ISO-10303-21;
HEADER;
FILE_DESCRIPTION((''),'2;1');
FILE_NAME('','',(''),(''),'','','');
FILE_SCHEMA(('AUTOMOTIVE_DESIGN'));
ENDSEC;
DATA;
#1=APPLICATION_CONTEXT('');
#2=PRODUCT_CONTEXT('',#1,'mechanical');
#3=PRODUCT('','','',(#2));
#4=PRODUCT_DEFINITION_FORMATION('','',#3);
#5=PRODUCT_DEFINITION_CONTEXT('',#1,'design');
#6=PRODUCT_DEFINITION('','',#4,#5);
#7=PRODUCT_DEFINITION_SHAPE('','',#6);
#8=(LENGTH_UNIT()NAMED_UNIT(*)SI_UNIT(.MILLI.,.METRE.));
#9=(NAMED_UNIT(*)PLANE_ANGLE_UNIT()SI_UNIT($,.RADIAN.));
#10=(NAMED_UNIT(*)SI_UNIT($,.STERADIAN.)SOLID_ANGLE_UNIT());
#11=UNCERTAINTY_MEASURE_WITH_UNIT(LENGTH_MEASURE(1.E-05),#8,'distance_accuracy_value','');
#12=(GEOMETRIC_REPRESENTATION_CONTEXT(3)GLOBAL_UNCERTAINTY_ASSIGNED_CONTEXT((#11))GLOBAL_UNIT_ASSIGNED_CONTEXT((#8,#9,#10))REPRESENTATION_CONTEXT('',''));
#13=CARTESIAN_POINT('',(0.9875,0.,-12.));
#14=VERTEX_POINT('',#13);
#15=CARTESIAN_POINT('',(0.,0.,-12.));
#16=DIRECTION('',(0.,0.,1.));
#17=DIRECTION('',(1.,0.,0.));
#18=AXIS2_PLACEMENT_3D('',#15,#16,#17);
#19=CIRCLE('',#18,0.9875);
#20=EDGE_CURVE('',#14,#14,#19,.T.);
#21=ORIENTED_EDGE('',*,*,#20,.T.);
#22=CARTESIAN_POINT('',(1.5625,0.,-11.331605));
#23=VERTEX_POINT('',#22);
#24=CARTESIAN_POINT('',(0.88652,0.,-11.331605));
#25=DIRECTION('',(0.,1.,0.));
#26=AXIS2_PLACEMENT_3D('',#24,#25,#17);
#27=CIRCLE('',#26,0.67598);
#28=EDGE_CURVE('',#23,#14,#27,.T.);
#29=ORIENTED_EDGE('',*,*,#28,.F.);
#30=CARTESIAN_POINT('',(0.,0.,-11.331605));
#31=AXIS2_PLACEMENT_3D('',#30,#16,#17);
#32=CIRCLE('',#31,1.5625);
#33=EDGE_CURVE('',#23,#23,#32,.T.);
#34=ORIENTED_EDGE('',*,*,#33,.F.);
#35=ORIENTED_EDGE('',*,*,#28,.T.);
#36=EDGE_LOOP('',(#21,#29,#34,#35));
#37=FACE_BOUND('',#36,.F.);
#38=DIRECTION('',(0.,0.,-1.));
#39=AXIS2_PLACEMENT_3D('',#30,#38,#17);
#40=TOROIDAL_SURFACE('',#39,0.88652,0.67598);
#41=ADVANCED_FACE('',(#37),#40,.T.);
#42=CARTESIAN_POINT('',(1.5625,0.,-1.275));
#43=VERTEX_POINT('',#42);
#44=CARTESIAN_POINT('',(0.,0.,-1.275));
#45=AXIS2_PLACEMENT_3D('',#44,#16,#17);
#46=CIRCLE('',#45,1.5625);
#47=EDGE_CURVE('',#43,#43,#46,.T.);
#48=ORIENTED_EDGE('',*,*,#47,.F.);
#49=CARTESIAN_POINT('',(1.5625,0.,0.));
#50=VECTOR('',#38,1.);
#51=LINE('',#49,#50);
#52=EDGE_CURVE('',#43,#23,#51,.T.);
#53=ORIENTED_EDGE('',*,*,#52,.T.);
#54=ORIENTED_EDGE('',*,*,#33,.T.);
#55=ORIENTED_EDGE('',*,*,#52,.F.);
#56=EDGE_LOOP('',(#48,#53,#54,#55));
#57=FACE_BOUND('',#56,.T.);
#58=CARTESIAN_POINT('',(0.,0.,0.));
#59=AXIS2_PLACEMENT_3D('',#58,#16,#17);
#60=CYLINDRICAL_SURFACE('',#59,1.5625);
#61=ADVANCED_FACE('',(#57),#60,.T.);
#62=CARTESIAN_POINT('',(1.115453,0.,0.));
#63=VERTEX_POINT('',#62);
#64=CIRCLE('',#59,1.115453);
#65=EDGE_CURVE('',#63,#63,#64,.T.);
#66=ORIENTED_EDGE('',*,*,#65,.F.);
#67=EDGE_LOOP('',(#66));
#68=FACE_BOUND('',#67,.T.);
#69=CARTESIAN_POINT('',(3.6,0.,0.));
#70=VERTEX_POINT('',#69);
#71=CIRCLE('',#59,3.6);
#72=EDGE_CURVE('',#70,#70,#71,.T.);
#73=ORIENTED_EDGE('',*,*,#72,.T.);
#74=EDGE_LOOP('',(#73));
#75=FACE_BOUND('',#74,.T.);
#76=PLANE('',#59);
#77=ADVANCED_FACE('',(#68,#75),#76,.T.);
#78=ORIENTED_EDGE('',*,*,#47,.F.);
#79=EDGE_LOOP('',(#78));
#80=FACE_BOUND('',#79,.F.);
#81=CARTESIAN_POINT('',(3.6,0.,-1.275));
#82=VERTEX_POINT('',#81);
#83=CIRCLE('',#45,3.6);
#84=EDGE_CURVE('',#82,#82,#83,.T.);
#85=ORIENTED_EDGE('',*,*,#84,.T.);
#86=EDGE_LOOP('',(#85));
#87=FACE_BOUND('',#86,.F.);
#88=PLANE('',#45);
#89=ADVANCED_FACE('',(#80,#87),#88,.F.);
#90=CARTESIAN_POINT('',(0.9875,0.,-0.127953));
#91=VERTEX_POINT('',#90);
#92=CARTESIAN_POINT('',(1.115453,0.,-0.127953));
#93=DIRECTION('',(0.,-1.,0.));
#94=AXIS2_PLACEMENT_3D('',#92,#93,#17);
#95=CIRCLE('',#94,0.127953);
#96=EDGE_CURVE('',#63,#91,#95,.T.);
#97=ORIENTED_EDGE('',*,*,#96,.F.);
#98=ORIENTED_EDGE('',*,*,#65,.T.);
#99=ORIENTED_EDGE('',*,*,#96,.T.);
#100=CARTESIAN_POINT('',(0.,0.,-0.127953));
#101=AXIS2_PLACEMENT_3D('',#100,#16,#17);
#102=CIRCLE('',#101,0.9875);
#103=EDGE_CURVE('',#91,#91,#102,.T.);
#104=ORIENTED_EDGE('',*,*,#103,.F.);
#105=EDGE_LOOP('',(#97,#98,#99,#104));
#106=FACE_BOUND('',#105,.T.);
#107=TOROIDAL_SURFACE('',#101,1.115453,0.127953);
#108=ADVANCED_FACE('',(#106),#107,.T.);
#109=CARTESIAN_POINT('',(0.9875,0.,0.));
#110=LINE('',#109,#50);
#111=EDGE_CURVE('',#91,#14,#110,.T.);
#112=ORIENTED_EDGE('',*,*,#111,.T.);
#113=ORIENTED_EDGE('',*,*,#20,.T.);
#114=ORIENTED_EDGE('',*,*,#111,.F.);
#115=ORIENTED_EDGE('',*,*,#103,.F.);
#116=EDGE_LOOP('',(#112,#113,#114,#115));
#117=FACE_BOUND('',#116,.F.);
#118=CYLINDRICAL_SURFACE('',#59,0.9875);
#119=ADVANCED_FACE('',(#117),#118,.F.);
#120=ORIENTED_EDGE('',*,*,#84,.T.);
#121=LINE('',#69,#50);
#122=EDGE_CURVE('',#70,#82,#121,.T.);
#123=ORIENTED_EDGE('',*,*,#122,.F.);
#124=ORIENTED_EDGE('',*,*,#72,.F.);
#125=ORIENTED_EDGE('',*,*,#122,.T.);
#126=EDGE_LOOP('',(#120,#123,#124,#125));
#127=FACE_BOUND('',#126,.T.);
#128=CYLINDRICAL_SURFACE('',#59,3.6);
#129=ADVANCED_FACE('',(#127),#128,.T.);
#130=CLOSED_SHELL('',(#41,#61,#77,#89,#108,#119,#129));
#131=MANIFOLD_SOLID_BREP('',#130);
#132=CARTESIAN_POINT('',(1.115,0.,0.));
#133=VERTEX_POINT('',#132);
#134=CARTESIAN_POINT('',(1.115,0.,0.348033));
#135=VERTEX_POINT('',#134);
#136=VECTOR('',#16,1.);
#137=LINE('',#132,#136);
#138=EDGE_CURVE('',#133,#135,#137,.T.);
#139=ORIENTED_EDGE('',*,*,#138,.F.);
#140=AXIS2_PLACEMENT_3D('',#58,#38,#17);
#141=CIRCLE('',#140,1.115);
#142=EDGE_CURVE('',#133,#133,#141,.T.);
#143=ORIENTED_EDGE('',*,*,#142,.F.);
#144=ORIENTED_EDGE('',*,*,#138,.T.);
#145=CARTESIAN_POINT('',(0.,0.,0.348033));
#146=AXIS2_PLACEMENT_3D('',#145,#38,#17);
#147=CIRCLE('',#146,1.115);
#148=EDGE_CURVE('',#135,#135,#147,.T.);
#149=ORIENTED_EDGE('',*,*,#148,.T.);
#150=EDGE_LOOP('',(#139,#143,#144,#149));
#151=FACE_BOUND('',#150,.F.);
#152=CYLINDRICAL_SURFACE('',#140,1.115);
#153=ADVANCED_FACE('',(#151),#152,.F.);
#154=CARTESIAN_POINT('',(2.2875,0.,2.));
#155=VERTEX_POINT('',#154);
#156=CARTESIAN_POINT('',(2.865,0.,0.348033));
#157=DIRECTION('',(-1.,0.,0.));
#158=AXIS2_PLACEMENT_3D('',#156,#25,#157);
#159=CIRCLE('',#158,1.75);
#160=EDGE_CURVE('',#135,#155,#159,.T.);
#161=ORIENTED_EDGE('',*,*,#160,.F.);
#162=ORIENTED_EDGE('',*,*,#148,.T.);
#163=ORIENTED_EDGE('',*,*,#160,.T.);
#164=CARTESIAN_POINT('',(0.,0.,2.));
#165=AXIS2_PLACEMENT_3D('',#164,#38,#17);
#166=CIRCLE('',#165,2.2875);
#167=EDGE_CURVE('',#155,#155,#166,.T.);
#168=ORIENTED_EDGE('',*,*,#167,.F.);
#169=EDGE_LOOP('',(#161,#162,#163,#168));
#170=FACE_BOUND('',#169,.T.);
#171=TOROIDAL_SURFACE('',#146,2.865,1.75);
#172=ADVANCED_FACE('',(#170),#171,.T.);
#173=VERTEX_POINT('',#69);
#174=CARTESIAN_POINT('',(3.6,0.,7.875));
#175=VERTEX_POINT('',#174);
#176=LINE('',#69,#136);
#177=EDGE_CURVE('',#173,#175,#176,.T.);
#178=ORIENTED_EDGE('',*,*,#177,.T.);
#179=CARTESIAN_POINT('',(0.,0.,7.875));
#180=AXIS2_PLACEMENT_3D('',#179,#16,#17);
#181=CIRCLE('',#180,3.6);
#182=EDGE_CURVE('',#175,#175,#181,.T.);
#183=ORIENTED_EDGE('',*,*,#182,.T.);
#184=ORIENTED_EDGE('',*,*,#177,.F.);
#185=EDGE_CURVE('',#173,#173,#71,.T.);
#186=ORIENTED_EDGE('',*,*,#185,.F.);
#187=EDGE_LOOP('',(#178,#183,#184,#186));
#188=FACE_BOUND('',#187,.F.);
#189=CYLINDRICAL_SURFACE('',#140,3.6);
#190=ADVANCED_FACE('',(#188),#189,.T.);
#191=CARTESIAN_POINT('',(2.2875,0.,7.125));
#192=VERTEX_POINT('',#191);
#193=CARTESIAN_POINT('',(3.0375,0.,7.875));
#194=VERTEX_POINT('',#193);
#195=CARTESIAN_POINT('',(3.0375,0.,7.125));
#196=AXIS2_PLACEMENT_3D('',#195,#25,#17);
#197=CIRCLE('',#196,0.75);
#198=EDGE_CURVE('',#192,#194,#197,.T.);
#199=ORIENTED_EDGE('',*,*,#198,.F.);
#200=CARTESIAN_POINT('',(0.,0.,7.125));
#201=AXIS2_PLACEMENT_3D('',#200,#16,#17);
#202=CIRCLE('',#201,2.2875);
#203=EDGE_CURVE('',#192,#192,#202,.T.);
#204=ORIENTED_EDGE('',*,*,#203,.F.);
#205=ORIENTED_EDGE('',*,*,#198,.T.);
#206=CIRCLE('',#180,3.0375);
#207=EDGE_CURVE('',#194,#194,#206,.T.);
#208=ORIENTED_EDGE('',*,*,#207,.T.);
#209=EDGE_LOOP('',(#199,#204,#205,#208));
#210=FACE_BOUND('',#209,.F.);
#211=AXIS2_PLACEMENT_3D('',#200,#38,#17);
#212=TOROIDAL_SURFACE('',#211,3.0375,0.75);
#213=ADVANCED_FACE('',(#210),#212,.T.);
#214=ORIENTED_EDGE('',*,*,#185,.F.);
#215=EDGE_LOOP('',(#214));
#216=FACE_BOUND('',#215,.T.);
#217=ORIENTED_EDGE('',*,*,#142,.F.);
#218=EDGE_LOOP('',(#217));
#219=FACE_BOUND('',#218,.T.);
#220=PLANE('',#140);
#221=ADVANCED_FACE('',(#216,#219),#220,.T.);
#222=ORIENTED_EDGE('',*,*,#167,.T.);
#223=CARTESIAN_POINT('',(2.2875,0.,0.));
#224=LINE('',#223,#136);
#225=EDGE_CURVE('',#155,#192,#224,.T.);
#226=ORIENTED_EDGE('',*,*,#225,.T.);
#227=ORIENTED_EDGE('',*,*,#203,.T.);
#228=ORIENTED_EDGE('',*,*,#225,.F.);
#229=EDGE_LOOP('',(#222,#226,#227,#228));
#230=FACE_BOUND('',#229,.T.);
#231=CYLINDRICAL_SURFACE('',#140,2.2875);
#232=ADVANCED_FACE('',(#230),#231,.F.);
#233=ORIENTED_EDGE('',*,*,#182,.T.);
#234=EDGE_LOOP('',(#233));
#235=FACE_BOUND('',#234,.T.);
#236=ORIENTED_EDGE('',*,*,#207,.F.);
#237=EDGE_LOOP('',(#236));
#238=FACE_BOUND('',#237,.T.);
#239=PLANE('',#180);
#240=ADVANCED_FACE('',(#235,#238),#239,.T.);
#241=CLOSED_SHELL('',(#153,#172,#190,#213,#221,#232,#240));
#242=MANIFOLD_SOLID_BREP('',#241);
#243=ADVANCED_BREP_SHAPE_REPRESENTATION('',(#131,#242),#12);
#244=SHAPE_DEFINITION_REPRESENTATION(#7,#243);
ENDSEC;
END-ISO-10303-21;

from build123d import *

# Parameters (mm, degrees)
F0_R     = 1.5625
F0_R_2   = 0.9875
F1_DEPTH = 12
F2_R     = 3.6
F2_R_2   = 2.5
F2_R_3   = 1.5625
F3_DEPTH = 1.275
F4_R     = 3.6
F4_R_2   = 2.2875
F5_DEPTH = 7.875
F6_R     = 2.2875
F6_R_2   = 1.115
F7_DEPTH = 2
F9_R     = 0.75
F11_R    = 0.1279533188


# Not quite as in the source:
# - a fillet or chamfer that OpenCascade refuses, or shapes differently, is made with other operations: its cross-section is extruded or revolved along the edge and cut away or added


with BuildPart() as f1:
    # F0 (on Top) → F1 (new body)
    with BuildSketch(Plane.XY):
        Circle(F0_R)
        Circle(F0_R_2, mode=Mode.SUBTRACT)
    extrude(amount=-F1_DEPTH)

    # F2 (on face) → F3 (join)
    with BuildSketch(Plane.XY):
        Circle(F2_R)
        Circle(F2_R_2, mode=Mode.SUBTRACT)
        Circle(F2_R_2)
        Circle(F2_R_3, mode=Mode.SUBTRACT)
    extrude(amount=-F3_DEPTH)

    # F10: fillet of radius 0.6759797975 on 1 edges, made by hand

    # F10_s1 → F10_t2 (revolve, cut)
    with BuildSketch(Plane.XZ):
        with BuildLine():
            ThreePointArc((1.5625, -11.3316050815), (1.3989697072, -11.7724499428), (0.9875, -12))
            Line((0.9875, -12), (1.5625, -12))
            Line((1.5625, -12), (1.5625, -11.3316050815))
        make_face()
    revolve(axis=Axis((0, 0, -12), (0, 0, 1)), mode=Mode.SUBTRACT)

    # F11
    f11_edges = [f1.edges().sort_by_distance(p)[0] for p in [
        (-0.9875, 0, 0),
    ]]
    fillet(f11_edges, radius=F11_R)


with BuildPart() as f5:
    # F4 (on face) → F5 (new body)
    with BuildSketch(Plane.XY):
        Circle(F4_R)
        Circle(F4_R_2, mode=Mode.SUBTRACT)
    extrude(amount=F5_DEPTH)

    # F6 (on face) → F7 (join)
    with BuildSketch(Plane(origin=(0, 0, 0), x_dir=(1, 0, 0), z_dir=(0, 0, -1))):
        Circle(F6_R)
        Circle(F6_R_2, mode=Mode.SUBTRACT)
    extrude(amount=-F7_DEPTH)

    # F8: fillet of radius 1.75 on 1 edges, made by hand

    # F8_s1 → F8_t2 (revolve, cut)
    with BuildSketch(Plane.XZ):
        with BuildLine():
            ThreePointArc((1.115, 0.348033369), (1.4379181873, 1.360919098), (2.2875, 2))
            Line((2.2875, 2), (1.115, 2))
            Line((1.115, 2), (1.115, 0.348033369))
        make_face()
    revolve(axis=Axis((0, 0, 2), (0, 0, -1)), mode=Mode.SUBTRACT)

    # F9
    f9_edges = [f5.edges().sort_by_distance(p)[0] for p in [
        (-2.2875, 0, 7.875),
    ]]
    fillet(f9_edges, radius=F9_R)


solid = Compound([f1.part, f5.part])
